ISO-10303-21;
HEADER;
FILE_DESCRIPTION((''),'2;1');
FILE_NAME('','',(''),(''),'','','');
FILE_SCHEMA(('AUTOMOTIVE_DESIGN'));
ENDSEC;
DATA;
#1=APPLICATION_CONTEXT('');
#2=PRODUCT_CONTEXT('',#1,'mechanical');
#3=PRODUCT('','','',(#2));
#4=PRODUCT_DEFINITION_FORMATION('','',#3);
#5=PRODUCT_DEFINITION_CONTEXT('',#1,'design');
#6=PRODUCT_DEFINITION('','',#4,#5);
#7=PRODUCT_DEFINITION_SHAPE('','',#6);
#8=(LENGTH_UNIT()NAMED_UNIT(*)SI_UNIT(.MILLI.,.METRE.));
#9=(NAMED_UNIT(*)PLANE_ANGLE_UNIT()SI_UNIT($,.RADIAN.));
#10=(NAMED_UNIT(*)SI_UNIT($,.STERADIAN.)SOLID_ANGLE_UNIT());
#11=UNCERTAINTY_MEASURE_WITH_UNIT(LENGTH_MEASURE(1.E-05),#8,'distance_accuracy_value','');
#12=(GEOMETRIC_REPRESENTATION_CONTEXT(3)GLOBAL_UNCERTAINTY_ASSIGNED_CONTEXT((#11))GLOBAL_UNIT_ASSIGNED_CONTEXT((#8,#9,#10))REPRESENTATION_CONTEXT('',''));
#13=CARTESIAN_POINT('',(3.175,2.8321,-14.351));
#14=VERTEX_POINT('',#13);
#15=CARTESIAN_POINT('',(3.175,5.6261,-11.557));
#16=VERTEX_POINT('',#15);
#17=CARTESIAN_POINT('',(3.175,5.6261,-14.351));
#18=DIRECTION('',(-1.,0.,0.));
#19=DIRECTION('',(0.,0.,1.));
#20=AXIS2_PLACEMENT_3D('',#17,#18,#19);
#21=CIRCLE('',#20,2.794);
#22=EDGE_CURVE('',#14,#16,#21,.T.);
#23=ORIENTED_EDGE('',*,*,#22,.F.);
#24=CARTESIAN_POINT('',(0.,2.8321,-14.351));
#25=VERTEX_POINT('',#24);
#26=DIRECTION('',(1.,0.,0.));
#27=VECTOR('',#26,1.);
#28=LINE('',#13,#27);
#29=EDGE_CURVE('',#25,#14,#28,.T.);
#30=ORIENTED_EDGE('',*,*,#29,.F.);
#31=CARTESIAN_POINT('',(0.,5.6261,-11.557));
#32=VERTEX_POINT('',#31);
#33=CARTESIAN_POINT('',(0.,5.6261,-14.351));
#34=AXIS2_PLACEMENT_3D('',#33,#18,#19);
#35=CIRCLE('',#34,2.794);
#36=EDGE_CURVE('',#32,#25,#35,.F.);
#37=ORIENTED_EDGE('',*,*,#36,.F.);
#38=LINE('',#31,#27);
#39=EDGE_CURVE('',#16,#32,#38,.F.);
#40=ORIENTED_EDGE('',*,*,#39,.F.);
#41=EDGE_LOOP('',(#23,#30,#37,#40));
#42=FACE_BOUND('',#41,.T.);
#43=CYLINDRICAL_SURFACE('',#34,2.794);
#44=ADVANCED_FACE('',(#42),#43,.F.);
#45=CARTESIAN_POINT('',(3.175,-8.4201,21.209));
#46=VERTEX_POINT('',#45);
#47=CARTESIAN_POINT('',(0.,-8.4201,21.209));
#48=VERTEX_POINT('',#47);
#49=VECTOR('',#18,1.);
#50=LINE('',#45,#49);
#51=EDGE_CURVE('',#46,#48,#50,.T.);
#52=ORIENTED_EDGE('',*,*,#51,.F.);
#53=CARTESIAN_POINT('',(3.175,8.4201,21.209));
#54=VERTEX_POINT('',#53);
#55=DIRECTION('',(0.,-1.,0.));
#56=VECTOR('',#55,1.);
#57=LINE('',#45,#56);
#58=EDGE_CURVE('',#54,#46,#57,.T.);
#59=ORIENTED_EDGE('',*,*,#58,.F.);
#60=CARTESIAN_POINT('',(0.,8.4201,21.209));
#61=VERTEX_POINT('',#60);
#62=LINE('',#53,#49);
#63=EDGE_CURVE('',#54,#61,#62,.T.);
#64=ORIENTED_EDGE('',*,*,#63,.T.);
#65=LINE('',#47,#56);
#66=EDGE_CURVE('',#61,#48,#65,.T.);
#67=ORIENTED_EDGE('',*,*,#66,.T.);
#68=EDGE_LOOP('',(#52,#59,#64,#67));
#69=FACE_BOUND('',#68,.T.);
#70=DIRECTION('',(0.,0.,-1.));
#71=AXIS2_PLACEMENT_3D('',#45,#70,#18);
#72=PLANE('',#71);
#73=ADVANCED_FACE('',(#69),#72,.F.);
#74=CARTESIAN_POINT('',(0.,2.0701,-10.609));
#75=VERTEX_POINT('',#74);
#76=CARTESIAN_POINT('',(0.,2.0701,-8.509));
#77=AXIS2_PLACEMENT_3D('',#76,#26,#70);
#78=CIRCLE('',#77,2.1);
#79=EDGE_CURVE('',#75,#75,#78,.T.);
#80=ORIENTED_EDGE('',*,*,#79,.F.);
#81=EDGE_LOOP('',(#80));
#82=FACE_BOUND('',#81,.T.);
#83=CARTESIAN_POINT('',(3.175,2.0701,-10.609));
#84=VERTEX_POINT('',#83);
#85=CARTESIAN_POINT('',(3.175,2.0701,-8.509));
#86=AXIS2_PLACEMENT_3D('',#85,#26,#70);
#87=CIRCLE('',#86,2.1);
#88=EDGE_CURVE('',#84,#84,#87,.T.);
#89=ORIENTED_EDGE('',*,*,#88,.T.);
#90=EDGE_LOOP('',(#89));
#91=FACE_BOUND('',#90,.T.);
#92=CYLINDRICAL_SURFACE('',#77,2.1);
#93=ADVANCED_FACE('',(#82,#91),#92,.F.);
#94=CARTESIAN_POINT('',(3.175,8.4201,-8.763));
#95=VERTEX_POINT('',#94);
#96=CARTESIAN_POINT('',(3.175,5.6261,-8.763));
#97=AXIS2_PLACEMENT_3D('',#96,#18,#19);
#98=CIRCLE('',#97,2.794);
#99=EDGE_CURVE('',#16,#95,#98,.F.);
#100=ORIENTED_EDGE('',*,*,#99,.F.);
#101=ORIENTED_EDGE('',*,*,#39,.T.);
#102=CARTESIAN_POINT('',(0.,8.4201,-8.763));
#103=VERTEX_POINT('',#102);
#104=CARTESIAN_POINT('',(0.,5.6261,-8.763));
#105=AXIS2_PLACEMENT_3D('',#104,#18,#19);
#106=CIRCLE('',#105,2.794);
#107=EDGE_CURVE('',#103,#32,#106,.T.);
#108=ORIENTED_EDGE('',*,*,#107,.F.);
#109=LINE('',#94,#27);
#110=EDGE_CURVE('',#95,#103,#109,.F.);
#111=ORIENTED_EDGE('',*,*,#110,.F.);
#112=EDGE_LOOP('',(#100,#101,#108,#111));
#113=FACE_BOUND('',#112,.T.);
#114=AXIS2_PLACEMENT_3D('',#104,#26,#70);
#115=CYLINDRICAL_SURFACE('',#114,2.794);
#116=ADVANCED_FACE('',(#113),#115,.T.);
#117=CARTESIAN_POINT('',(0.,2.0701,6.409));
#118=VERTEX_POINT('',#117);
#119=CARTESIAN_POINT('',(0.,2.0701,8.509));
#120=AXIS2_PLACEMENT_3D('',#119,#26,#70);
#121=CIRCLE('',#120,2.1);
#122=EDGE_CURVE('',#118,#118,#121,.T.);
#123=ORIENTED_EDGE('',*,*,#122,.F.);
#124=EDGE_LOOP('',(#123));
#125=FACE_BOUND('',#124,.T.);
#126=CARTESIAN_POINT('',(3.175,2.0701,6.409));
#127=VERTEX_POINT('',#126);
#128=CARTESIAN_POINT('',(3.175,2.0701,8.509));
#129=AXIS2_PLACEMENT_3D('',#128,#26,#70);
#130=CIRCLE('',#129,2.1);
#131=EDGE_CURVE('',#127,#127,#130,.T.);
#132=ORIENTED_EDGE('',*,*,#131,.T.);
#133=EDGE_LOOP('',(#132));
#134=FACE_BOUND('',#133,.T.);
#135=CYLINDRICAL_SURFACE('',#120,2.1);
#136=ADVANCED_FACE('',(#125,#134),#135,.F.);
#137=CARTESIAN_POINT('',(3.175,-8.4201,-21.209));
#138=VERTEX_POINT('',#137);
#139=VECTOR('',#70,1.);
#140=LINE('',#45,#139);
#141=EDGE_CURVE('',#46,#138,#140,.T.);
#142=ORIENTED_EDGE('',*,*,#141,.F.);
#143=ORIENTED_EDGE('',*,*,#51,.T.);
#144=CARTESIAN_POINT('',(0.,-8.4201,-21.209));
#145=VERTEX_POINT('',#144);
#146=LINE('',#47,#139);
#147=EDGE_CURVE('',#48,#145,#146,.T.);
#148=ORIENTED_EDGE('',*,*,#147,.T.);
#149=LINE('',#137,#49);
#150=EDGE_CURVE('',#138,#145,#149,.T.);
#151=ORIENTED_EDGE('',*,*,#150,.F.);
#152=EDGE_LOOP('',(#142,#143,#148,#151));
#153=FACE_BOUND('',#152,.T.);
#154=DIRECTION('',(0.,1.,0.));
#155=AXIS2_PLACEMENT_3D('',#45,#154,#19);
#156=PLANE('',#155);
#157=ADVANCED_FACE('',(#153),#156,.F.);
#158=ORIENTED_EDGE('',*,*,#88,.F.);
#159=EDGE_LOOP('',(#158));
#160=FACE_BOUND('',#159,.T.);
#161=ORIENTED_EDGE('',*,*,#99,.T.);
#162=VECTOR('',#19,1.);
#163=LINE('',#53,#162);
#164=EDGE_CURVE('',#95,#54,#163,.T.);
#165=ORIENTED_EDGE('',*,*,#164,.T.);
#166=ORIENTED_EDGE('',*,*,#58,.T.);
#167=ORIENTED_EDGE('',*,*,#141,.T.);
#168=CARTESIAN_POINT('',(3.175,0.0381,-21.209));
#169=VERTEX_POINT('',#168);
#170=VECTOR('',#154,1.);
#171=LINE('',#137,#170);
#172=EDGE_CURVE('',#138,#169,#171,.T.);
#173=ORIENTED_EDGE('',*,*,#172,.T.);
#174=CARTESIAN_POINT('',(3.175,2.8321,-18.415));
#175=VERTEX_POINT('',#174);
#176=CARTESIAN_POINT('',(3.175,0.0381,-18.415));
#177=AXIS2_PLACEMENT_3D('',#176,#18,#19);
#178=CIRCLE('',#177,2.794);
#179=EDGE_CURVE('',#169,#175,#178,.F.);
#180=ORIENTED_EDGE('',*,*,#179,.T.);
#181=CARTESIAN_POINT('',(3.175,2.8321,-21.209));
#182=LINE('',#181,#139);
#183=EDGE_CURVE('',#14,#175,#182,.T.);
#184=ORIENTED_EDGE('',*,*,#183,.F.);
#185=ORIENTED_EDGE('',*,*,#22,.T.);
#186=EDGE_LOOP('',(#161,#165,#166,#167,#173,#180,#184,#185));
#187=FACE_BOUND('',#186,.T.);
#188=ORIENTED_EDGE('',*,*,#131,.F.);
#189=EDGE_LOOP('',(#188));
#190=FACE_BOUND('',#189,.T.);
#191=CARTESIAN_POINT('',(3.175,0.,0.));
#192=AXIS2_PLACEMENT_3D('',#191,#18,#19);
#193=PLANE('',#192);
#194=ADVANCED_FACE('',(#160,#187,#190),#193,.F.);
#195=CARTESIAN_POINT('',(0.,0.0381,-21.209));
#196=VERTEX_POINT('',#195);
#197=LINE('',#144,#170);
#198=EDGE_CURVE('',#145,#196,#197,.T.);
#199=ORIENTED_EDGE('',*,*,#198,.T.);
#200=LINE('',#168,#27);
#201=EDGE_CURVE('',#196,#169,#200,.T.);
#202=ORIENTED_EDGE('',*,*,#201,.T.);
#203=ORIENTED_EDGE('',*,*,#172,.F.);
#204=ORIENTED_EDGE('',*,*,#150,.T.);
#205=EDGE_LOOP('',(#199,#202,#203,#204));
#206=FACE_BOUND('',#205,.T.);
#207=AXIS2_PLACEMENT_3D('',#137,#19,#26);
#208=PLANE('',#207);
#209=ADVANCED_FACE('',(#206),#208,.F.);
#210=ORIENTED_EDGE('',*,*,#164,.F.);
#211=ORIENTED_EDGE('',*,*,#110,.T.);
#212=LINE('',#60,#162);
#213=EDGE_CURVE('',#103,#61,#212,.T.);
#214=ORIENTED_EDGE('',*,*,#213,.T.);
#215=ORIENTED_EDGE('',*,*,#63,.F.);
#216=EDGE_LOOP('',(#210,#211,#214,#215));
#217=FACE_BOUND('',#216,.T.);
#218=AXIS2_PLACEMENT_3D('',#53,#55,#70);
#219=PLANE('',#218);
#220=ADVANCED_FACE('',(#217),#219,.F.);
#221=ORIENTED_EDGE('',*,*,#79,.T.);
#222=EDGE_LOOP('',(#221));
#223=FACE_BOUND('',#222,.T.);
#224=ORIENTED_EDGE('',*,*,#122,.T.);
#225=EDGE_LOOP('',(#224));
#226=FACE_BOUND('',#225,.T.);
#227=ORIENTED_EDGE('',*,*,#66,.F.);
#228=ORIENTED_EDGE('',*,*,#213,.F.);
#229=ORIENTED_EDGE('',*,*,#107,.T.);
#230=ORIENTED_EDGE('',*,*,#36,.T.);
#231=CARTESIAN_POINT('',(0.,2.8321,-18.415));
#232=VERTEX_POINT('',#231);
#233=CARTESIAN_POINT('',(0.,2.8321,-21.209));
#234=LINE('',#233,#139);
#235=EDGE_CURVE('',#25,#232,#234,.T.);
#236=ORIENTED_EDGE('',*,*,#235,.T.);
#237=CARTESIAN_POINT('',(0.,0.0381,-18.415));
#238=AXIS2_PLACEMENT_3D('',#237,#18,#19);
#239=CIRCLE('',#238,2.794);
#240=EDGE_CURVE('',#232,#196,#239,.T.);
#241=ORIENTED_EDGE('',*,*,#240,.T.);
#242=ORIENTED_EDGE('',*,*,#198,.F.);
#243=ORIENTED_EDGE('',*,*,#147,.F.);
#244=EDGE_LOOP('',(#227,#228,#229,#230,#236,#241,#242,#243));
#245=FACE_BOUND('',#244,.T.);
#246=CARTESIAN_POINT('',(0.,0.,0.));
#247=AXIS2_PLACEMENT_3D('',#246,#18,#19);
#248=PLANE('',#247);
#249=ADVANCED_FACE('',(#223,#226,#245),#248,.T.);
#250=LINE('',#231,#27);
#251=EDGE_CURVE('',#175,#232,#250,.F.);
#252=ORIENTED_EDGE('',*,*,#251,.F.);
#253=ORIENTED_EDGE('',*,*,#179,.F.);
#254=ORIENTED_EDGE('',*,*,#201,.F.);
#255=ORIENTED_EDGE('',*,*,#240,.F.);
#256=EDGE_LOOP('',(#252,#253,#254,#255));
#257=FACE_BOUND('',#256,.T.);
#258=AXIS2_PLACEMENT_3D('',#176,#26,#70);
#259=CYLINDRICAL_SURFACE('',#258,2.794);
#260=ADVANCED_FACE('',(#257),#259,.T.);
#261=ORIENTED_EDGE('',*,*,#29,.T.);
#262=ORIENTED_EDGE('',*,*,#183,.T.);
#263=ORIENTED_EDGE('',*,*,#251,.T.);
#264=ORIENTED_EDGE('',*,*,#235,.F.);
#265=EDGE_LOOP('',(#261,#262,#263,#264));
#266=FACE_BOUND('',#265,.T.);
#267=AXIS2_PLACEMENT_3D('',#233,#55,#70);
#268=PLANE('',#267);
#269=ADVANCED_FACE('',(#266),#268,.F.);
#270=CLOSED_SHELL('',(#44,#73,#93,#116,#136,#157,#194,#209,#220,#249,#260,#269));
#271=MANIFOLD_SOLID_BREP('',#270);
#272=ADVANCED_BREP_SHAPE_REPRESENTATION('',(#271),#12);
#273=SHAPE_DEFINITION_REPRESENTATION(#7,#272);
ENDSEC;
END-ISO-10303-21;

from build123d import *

# Parameters (mm, degrees)
SKETCH1_W           = 42.418
SKETCH1_H           = 16.8402
BOSS_EXTRUDE1_DEPTH = 3.175
SKETCH3_R           = 2.1
CUT_EXTRUDE1_DEPTH  = 24.039105669
SKETCH4_W           = 9.652
SKETCH4_H           = 5.588
CUT_EXTRUDE2_DEPTH  = 24.039105669
FILLET1_R           = 2.794


with BuildPart() as part:
    # Sketch1 → Boss-Extrude1 (new body)
    with BuildSketch(Plane(origin=(0, 0, 0), x_dir=(0, 0, -1), z_dir=(1, 0, 0))):
        Rectangle(SKETCH1_W, SKETCH1_H)
    extrude(amount=BOSS_EXTRUDE1_DEPTH)

    # Sketch3 → Cut-Extrude1 (cut, through all)
    with BuildSketch(Plane(origin=(3.175, 0, 0), x_dir=(0, 0, -1), z_dir=(1, 0, 0))):
        with Locations((-8.509, 2.0701)):
            Circle(SKETCH3_R)
        with Locations((8.509, 2.0701)):
            Circle(SKETCH3_R)
    extrude(amount=-CUT_EXTRUDE1_DEPTH, mode=Mode.SUBTRACT)

    # Sketch4 → Cut-Extrude2 (cut, through all)
    with BuildSketch(Plane(origin=(3.175, 0, 0), x_dir=(0, 0, -1), z_dir=(1, 0, 0))):
        with Locations((16.383, 5.6261)):
            Rectangle(SKETCH4_W, SKETCH4_H)
    extrude(amount=-CUT_EXTRUDE2_DEPTH, mode=Mode.SUBTRACT)

    # Fillet1
    fillet1_edges = [part.edges().sort_by_distance(p)[0] for p in [
        (1.5875, 2.8321, -21.209),
        (1.5875, 8.4201, -11.557),
        (1.5875, 2.8321, -11.557),
    ]]
    fillet(fillet1_edges, radius=FILLET1_R - 0.0001)  # a hair under: the kernel refuses the full size


solid = part.part
